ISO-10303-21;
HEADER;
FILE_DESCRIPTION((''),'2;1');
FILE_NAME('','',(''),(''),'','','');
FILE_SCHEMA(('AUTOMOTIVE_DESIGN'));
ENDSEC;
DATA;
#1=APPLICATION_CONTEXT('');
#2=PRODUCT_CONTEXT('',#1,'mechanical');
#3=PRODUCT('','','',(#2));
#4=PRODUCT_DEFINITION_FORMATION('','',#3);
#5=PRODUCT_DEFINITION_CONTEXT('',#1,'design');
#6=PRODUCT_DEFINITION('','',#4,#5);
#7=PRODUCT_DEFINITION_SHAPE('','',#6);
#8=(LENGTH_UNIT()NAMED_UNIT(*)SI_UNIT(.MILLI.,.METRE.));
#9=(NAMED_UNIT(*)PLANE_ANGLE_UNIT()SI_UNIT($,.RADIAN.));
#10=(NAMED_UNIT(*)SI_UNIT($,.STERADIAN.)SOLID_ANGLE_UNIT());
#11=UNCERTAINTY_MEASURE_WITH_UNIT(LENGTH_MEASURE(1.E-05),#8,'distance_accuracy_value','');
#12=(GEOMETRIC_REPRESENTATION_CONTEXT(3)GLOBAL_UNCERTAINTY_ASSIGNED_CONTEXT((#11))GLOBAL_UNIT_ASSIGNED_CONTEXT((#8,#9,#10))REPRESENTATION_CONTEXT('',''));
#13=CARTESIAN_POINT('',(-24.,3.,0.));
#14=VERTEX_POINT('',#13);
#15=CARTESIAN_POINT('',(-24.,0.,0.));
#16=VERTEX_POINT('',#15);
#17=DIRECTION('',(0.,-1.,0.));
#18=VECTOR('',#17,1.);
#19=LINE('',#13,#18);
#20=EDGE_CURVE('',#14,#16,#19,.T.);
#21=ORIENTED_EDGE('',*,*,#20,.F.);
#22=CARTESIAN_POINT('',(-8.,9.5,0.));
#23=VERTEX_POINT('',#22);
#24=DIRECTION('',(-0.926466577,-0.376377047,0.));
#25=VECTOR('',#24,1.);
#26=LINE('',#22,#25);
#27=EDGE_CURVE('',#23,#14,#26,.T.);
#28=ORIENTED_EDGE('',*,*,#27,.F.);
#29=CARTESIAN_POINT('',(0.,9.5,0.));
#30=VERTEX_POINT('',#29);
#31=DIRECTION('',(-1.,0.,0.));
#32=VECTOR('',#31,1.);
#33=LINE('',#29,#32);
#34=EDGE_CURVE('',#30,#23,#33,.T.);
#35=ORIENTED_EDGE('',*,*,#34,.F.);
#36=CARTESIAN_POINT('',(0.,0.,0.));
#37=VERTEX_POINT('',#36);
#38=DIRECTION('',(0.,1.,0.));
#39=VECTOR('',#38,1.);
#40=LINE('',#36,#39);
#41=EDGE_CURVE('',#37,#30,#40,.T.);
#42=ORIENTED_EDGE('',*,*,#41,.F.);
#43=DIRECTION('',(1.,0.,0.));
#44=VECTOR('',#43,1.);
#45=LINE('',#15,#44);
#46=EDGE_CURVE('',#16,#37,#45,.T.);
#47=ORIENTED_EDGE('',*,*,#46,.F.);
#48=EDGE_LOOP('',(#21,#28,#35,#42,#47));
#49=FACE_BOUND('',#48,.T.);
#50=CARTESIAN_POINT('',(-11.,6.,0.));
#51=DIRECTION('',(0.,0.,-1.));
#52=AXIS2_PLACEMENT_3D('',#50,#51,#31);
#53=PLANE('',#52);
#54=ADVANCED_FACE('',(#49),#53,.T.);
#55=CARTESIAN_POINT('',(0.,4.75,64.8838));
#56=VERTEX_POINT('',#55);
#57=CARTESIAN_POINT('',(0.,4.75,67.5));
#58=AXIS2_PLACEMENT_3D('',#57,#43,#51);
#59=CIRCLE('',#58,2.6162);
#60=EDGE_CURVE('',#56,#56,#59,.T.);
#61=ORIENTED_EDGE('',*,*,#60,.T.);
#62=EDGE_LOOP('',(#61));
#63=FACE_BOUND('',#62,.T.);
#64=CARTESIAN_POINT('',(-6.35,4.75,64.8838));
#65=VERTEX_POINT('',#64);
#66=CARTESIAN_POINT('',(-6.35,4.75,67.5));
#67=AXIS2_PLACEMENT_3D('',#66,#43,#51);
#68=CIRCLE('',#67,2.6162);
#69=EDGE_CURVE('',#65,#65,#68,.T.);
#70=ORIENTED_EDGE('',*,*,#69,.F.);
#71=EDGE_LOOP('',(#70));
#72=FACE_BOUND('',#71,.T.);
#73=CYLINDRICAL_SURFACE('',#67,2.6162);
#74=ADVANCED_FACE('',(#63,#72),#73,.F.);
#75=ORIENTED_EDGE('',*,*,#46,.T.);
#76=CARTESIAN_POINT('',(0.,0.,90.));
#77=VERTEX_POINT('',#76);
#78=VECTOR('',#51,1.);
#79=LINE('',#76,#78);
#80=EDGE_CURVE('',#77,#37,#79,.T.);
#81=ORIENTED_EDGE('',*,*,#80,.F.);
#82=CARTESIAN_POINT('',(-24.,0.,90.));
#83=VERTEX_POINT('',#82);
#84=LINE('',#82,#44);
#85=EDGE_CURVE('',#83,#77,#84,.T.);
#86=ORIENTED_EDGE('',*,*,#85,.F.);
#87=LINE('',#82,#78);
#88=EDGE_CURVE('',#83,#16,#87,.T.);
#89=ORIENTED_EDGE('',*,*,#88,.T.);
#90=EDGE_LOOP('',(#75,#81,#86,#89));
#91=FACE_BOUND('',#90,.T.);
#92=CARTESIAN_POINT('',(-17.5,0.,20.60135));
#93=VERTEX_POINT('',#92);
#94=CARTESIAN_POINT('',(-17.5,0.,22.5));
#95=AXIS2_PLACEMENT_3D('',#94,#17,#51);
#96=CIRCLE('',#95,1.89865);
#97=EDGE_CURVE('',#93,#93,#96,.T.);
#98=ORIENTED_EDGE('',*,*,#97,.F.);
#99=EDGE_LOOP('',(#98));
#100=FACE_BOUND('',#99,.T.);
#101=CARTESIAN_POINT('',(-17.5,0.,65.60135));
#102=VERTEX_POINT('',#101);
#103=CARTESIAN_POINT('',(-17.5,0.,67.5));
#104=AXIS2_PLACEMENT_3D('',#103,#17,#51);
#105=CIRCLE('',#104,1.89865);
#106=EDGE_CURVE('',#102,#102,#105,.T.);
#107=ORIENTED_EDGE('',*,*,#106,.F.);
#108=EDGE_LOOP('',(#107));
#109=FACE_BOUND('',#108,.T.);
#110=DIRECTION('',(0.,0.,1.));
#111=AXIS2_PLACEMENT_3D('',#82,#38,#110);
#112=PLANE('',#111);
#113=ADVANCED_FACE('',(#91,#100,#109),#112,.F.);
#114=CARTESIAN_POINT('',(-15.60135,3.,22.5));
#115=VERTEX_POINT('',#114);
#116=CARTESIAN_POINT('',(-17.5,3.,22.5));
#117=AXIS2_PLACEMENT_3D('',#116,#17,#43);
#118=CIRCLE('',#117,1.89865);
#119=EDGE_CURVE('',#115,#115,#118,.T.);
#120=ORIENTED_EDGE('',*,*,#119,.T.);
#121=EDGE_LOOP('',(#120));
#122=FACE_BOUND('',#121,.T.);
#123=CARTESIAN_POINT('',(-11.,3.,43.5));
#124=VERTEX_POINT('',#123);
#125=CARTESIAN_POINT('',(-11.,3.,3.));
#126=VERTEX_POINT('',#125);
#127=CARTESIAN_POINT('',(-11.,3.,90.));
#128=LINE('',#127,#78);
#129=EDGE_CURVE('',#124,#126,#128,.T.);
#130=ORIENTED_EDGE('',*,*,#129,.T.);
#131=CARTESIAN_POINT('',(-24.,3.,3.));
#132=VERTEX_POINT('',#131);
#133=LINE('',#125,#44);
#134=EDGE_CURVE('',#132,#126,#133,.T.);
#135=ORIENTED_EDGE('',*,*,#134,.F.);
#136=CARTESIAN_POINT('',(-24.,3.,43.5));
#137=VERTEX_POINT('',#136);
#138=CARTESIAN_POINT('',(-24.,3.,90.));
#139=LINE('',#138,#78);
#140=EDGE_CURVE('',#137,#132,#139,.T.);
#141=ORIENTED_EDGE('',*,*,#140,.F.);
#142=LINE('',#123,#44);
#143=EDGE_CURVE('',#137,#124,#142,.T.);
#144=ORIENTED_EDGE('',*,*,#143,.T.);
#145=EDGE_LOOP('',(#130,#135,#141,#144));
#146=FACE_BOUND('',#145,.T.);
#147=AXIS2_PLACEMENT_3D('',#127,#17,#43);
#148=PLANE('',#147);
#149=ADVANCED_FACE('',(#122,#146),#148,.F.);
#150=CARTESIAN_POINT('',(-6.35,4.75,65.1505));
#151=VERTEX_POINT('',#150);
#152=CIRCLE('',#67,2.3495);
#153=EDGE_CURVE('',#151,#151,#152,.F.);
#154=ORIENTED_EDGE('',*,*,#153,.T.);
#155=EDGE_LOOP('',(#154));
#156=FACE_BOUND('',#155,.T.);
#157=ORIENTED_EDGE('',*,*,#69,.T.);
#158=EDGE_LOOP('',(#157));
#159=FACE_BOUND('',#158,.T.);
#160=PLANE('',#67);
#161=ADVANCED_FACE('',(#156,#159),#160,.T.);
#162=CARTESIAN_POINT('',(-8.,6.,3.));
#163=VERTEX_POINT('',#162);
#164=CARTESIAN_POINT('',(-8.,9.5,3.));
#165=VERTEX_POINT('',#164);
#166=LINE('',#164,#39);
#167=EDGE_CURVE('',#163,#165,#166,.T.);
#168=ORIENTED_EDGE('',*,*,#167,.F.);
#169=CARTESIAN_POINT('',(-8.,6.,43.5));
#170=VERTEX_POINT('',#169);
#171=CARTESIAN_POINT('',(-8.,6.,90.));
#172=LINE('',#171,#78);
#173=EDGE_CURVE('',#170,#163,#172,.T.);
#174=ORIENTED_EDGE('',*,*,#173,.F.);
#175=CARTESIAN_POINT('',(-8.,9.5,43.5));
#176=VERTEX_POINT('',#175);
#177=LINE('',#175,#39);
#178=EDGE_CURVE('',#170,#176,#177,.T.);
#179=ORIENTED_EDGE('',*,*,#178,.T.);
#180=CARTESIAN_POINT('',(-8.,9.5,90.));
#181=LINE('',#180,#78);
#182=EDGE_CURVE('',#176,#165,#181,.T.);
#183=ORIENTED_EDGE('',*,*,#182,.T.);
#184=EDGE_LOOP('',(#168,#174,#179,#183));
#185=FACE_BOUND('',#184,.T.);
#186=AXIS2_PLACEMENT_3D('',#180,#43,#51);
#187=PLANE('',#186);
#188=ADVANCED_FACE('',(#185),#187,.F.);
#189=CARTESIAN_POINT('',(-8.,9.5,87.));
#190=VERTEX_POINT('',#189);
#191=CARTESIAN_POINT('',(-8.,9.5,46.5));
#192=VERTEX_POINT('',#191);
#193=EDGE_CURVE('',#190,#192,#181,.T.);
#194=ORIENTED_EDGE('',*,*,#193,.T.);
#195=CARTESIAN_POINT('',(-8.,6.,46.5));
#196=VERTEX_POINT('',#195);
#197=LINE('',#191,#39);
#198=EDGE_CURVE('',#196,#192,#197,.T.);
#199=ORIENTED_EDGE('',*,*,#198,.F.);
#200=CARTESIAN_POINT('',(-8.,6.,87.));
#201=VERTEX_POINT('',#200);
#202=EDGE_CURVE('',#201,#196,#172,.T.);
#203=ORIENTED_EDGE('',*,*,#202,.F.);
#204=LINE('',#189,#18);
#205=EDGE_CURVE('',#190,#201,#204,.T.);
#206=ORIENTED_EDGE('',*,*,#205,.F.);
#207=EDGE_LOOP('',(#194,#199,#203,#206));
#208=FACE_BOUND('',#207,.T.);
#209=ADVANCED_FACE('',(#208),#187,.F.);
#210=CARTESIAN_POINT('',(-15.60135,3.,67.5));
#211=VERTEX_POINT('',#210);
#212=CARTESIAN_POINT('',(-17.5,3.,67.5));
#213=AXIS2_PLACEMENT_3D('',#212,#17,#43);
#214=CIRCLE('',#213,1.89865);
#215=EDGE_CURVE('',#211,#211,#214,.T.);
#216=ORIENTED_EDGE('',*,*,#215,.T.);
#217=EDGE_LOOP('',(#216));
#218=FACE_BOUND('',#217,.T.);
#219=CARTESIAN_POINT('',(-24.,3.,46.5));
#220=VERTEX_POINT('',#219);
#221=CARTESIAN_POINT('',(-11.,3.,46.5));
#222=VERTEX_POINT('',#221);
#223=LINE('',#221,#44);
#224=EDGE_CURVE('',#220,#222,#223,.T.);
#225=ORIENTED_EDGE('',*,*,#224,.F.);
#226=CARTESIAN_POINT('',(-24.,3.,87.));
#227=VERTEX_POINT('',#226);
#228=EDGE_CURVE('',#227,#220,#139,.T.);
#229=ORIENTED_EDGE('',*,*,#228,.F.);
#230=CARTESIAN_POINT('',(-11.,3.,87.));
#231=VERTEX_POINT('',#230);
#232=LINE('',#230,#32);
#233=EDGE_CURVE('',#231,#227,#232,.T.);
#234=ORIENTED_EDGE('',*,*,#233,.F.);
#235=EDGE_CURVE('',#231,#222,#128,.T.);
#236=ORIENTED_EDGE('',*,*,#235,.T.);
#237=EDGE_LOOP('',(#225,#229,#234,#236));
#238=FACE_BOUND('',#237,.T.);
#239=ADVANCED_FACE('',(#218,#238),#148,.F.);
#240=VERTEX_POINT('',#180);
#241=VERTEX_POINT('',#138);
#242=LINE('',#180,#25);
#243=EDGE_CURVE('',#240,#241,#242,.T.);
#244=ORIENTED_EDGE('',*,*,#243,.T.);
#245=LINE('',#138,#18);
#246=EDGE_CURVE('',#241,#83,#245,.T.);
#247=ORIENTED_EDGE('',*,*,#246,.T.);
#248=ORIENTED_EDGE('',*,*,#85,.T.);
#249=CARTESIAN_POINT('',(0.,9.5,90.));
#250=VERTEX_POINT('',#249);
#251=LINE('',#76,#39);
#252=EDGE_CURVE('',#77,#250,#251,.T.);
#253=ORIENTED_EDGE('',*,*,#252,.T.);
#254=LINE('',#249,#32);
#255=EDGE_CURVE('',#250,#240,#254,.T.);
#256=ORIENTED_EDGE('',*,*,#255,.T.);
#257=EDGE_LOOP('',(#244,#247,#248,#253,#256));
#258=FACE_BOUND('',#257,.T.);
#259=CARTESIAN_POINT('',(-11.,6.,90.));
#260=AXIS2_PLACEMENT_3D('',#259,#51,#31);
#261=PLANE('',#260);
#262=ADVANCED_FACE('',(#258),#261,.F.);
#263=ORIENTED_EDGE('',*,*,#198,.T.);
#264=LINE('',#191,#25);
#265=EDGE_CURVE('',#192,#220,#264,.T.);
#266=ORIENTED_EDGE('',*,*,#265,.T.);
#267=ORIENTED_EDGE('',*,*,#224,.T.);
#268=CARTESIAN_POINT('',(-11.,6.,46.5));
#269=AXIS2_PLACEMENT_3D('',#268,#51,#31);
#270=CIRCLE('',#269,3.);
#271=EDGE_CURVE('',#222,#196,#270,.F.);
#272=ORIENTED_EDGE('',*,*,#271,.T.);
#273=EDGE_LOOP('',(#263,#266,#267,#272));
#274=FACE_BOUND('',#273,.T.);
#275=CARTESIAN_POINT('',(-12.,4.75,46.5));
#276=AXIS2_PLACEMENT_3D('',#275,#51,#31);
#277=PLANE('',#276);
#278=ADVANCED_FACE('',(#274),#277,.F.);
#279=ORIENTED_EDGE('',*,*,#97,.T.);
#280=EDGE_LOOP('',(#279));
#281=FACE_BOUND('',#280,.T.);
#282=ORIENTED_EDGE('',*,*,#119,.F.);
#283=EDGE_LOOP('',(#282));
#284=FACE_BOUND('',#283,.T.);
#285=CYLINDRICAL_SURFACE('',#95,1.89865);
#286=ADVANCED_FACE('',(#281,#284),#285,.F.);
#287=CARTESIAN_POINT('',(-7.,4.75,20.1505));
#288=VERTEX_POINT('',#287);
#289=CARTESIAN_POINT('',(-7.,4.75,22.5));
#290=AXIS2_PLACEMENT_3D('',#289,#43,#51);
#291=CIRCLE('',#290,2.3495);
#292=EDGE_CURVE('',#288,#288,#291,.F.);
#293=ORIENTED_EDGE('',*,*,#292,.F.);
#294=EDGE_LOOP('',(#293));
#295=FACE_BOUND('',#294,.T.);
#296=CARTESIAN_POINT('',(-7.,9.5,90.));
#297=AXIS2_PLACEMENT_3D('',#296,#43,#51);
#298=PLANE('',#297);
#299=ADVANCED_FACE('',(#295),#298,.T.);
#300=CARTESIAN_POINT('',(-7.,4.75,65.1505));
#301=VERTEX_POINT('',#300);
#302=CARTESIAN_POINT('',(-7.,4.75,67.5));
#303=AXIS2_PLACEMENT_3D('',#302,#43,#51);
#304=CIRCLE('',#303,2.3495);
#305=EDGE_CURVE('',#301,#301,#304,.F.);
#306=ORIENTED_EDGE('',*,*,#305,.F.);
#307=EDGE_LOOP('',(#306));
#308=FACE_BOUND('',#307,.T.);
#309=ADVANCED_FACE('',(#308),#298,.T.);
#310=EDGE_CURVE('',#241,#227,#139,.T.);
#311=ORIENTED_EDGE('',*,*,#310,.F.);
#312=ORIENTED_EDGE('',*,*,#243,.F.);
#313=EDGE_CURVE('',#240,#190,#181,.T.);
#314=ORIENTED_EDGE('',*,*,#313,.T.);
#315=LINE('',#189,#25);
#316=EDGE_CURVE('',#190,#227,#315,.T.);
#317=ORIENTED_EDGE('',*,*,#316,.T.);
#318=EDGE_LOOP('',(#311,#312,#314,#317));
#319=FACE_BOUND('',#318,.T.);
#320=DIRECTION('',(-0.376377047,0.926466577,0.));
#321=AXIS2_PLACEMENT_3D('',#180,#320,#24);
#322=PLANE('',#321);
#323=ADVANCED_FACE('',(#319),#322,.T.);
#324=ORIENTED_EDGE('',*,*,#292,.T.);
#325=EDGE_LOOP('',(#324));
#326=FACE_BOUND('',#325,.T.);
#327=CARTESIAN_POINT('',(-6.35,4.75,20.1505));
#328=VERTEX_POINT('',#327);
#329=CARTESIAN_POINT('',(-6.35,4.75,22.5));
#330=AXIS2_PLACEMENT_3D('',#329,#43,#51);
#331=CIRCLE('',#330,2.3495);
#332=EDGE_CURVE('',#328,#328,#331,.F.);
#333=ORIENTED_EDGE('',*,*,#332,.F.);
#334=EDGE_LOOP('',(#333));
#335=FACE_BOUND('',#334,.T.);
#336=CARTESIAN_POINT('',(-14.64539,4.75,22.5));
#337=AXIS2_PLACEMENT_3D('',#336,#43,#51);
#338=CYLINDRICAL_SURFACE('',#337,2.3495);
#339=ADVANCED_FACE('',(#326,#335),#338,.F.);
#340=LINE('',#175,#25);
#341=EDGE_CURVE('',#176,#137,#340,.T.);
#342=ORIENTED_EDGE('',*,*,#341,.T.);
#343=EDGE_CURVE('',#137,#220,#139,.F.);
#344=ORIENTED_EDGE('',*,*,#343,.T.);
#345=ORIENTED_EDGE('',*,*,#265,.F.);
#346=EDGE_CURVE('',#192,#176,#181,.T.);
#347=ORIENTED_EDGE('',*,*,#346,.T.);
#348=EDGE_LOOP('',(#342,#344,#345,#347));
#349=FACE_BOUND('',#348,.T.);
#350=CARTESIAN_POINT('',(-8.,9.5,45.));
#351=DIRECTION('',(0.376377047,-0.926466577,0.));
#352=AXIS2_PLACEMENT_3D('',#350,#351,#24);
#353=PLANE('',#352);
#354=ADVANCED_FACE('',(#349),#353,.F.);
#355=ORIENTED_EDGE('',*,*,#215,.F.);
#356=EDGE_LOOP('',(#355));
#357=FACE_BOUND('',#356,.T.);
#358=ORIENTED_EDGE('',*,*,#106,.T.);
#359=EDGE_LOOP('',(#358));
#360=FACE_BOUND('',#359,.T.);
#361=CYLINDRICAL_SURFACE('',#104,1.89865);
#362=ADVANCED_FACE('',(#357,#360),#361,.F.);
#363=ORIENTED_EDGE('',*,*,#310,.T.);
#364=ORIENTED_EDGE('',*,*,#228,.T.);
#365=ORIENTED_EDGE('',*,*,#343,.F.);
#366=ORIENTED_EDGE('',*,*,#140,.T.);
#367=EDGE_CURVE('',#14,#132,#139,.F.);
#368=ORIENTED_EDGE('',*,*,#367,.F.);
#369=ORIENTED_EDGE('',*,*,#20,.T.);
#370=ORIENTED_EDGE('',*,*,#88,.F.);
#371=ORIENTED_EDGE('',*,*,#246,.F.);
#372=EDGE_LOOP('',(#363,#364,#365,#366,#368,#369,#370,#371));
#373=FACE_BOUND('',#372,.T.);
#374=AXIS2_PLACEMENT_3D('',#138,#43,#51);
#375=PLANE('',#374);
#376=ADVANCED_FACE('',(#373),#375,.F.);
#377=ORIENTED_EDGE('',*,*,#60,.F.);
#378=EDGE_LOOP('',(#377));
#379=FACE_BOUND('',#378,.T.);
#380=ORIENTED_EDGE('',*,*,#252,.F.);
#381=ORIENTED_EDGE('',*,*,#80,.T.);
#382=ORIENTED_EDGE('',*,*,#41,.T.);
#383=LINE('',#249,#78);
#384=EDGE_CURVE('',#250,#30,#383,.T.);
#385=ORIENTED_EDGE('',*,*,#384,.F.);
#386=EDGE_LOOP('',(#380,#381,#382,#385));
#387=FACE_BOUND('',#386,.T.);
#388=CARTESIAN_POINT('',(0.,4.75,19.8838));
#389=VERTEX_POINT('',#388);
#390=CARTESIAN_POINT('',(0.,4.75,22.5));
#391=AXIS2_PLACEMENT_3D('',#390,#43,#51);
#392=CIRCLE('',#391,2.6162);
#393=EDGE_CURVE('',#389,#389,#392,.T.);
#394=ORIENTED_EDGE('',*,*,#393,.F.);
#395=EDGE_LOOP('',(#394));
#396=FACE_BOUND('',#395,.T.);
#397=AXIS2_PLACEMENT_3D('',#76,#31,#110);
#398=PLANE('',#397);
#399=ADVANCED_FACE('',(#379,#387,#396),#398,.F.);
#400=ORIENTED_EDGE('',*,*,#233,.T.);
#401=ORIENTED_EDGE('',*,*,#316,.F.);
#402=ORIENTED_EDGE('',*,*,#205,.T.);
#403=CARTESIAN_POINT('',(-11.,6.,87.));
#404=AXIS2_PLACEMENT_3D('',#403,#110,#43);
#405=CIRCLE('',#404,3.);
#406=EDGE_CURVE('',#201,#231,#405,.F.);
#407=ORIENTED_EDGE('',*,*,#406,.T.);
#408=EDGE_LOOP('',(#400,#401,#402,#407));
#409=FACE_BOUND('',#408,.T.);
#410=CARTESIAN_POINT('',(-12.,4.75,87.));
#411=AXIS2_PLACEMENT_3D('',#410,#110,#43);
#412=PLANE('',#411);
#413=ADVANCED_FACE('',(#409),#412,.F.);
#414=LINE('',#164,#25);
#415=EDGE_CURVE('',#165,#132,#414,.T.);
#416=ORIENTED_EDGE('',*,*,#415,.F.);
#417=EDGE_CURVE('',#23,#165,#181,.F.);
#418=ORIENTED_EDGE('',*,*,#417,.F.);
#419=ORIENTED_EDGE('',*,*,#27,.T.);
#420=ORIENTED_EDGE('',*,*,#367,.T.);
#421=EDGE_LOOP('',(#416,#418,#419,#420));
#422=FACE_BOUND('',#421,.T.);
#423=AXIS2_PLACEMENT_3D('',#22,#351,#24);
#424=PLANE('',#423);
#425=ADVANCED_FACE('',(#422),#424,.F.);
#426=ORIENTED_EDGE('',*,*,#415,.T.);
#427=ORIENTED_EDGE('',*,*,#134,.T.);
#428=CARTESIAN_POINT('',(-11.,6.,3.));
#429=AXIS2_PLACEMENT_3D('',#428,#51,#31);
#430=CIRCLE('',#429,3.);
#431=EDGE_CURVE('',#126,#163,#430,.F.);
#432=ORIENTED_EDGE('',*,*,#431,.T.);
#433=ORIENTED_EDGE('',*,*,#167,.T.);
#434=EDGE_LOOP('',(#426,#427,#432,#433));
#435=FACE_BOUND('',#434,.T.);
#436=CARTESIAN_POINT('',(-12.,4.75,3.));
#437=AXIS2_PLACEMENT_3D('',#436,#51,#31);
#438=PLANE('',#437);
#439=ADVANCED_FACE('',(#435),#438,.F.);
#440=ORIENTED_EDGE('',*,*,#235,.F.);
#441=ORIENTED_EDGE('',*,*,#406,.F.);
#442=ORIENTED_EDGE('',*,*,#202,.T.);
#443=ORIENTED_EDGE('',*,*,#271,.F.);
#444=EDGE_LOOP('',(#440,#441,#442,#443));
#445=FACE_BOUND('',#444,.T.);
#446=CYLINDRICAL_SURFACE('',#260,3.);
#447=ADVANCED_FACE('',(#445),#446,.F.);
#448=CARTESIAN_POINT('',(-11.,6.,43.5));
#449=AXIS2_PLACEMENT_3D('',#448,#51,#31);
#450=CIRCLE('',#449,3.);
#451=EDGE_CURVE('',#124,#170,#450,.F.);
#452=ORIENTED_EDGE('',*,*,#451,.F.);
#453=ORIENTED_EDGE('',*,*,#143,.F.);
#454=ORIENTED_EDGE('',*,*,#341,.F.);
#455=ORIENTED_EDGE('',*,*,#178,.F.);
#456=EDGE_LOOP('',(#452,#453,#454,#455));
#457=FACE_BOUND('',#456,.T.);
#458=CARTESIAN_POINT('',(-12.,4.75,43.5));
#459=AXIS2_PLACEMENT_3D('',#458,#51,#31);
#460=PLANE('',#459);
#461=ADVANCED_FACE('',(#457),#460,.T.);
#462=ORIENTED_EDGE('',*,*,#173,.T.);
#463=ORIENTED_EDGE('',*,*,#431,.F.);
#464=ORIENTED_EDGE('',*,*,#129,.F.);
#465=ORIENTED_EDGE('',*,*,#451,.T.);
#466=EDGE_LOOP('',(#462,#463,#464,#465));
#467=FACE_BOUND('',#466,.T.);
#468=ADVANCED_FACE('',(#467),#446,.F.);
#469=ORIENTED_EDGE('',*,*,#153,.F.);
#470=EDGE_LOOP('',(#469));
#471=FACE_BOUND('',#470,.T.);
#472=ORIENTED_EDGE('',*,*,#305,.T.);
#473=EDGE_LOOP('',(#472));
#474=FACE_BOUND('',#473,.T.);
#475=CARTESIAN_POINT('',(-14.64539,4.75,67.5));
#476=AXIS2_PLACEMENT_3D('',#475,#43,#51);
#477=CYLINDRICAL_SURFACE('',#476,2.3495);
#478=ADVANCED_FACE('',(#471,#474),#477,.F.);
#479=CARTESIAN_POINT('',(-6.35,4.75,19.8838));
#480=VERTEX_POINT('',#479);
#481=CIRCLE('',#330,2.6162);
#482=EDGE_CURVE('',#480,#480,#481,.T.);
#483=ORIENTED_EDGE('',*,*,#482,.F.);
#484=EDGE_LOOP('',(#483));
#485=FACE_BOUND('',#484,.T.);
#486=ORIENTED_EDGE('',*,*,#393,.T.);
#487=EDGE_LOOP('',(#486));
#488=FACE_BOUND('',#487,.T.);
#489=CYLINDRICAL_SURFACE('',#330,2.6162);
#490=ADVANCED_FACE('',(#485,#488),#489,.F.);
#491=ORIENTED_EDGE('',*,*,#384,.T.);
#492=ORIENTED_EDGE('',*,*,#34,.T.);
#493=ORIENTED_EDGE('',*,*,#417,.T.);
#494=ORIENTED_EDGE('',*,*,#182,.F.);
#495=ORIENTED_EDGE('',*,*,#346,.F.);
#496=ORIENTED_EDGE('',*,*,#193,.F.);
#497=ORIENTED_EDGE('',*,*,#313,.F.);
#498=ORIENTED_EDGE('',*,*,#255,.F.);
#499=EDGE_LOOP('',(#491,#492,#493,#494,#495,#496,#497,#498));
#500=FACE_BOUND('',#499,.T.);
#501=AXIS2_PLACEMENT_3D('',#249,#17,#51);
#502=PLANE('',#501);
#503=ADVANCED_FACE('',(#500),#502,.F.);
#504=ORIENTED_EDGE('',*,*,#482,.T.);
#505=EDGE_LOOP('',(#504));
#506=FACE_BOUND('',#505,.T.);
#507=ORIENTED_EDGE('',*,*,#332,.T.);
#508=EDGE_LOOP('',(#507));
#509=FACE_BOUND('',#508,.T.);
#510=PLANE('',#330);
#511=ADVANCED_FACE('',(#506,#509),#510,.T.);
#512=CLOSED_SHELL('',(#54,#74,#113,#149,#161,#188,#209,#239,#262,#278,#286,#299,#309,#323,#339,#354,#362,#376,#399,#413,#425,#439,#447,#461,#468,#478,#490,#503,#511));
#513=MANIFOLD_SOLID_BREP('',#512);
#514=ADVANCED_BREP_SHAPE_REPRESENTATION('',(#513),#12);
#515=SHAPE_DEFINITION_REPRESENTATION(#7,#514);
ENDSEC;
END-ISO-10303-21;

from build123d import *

# Parameters (mm, degrees)
BOSS_EXTRUDE1_DEPTH   = 90
RIB3_REACH            = 53.877
SKETCH4_WALL_W        = 123.024434014
SKETCH4_WALL_H        = 3
RIB4_START            = -3
RIB4_DEPTH            = 3
F_6_CLEARANCE_HOLE1_D = 3.7973
SKETCH6_R             = 2.3495
CUT_EXTRUDE1_DEPTH    = 7
SKETCH12_R            = 2.6162
CUT_EXTRUDE2_DEPTH    = 6.35


# Read off the part's stored shape, not the designer's step: Rib4
with BuildPart() as part:
    # Sketch1 → Boss-Extrude1 (new body)
    with BuildSketch(Plane.XY):
        with BuildLine():
            Line((0, 0), (0, 9.5))
            Line((0, 9.5), (-8, 9.5))
            Line((-8, 9.5), (-8, 6))
            ThreePointArc((-8, 6), (-8.878679656, 3.878679656), (-11, 3))
            Line((-11, 3), (-24, 3))
            Line((-24, 3), (-24, 0))
            Line((-24, 0), (0, 0))
        make_face()
    extrude(amount=BOSS_EXTRUDE1_DEPTH)

    # Sketch4 wall → Rib3 (add, up to next)
    with BuildSketch(Plane(origin=(-16, 6.25, 45), x_dir=(-0.926466577122, -0.376377046956, 0), z_dir=(-0.376377046956, 0.926466577122, 0)), mode=Mode.PRIVATE) as rib3_sk1:
        Rectangle(SKETCH4_WALL_W, SKETCH4_WALL_H)
    rib3_tool1 = extrude(rib3_sk1.sketch, amount=-RIB3_REACH, mode=Mode.PRIVATE) - part.part
    add(rib3_tool1.solids().sort_by_distance((-16, 6.25, 45))[0])

    # Rib4 outline → Rib4 (add)
    with BuildSketch(Plane(origin=(0, 0, 0), x_dir=(-1, 0, 0), z_dir=(0, 0, -1)).offset(RIB4_START)):
        with BuildLine():
            Line((24, 3), (8, 9.5))
            Line((8, 9.5), (8, 6))
            ThreePointArc((8, 6), (8.878679656, 3.878679656), (11, 3))
            Line((11, 3), (24, 3))
        make_face()
    rib4 = extrude(amount=RIB4_DEPTH)

    # Mirror1: Rib4 across plane
    add(rib4.mirror(Plane(origin=(0, 0, 45), x_dir=(1, 0, 0), z_dir=(0, 0, -1))))

    # #6 Clearance Hole1 (through all)
    with Locations(Plane(origin=(0, 0, 0), x_dir=(-1, 0, 0), z_dir=(0, -1, 0))):
        with Locations((17.5, -22.5), (17.5, -67.5)):
            Hole(F_6_CLEARANCE_HOLE1_D / 2)

    # Sketch6 → Cut-Extrude1 (cut)
    with BuildSketch(Plane(origin=(0, 0, 0), x_dir=(0, 0, -1), z_dir=(1, 0, 0))):
        with Locations((-67.5, 4.75)):
            Circle(SKETCH6_R)
        with Locations((-22.5, 4.75)):
            Circle(SKETCH6_R)
    extrude(amount=-CUT_EXTRUDE1_DEPTH, mode=Mode.SUBTRACT)

    # Sketch12 → Cut-Extrude2 (cut)
    with BuildSketch(Plane(origin=(0, 0, 0), x_dir=(0, 0, -1), z_dir=(1, 0, 0))):
        with Locations((-67.5, 4.75)):
            Circle(SKETCH12_R)
        with Locations((-22.5, 4.75)):
            Circle(SKETCH12_R)
    extrude(amount=-CUT_EXTRUDE2_DEPTH, mode=Mode.SUBTRACT)


solid = part.part
